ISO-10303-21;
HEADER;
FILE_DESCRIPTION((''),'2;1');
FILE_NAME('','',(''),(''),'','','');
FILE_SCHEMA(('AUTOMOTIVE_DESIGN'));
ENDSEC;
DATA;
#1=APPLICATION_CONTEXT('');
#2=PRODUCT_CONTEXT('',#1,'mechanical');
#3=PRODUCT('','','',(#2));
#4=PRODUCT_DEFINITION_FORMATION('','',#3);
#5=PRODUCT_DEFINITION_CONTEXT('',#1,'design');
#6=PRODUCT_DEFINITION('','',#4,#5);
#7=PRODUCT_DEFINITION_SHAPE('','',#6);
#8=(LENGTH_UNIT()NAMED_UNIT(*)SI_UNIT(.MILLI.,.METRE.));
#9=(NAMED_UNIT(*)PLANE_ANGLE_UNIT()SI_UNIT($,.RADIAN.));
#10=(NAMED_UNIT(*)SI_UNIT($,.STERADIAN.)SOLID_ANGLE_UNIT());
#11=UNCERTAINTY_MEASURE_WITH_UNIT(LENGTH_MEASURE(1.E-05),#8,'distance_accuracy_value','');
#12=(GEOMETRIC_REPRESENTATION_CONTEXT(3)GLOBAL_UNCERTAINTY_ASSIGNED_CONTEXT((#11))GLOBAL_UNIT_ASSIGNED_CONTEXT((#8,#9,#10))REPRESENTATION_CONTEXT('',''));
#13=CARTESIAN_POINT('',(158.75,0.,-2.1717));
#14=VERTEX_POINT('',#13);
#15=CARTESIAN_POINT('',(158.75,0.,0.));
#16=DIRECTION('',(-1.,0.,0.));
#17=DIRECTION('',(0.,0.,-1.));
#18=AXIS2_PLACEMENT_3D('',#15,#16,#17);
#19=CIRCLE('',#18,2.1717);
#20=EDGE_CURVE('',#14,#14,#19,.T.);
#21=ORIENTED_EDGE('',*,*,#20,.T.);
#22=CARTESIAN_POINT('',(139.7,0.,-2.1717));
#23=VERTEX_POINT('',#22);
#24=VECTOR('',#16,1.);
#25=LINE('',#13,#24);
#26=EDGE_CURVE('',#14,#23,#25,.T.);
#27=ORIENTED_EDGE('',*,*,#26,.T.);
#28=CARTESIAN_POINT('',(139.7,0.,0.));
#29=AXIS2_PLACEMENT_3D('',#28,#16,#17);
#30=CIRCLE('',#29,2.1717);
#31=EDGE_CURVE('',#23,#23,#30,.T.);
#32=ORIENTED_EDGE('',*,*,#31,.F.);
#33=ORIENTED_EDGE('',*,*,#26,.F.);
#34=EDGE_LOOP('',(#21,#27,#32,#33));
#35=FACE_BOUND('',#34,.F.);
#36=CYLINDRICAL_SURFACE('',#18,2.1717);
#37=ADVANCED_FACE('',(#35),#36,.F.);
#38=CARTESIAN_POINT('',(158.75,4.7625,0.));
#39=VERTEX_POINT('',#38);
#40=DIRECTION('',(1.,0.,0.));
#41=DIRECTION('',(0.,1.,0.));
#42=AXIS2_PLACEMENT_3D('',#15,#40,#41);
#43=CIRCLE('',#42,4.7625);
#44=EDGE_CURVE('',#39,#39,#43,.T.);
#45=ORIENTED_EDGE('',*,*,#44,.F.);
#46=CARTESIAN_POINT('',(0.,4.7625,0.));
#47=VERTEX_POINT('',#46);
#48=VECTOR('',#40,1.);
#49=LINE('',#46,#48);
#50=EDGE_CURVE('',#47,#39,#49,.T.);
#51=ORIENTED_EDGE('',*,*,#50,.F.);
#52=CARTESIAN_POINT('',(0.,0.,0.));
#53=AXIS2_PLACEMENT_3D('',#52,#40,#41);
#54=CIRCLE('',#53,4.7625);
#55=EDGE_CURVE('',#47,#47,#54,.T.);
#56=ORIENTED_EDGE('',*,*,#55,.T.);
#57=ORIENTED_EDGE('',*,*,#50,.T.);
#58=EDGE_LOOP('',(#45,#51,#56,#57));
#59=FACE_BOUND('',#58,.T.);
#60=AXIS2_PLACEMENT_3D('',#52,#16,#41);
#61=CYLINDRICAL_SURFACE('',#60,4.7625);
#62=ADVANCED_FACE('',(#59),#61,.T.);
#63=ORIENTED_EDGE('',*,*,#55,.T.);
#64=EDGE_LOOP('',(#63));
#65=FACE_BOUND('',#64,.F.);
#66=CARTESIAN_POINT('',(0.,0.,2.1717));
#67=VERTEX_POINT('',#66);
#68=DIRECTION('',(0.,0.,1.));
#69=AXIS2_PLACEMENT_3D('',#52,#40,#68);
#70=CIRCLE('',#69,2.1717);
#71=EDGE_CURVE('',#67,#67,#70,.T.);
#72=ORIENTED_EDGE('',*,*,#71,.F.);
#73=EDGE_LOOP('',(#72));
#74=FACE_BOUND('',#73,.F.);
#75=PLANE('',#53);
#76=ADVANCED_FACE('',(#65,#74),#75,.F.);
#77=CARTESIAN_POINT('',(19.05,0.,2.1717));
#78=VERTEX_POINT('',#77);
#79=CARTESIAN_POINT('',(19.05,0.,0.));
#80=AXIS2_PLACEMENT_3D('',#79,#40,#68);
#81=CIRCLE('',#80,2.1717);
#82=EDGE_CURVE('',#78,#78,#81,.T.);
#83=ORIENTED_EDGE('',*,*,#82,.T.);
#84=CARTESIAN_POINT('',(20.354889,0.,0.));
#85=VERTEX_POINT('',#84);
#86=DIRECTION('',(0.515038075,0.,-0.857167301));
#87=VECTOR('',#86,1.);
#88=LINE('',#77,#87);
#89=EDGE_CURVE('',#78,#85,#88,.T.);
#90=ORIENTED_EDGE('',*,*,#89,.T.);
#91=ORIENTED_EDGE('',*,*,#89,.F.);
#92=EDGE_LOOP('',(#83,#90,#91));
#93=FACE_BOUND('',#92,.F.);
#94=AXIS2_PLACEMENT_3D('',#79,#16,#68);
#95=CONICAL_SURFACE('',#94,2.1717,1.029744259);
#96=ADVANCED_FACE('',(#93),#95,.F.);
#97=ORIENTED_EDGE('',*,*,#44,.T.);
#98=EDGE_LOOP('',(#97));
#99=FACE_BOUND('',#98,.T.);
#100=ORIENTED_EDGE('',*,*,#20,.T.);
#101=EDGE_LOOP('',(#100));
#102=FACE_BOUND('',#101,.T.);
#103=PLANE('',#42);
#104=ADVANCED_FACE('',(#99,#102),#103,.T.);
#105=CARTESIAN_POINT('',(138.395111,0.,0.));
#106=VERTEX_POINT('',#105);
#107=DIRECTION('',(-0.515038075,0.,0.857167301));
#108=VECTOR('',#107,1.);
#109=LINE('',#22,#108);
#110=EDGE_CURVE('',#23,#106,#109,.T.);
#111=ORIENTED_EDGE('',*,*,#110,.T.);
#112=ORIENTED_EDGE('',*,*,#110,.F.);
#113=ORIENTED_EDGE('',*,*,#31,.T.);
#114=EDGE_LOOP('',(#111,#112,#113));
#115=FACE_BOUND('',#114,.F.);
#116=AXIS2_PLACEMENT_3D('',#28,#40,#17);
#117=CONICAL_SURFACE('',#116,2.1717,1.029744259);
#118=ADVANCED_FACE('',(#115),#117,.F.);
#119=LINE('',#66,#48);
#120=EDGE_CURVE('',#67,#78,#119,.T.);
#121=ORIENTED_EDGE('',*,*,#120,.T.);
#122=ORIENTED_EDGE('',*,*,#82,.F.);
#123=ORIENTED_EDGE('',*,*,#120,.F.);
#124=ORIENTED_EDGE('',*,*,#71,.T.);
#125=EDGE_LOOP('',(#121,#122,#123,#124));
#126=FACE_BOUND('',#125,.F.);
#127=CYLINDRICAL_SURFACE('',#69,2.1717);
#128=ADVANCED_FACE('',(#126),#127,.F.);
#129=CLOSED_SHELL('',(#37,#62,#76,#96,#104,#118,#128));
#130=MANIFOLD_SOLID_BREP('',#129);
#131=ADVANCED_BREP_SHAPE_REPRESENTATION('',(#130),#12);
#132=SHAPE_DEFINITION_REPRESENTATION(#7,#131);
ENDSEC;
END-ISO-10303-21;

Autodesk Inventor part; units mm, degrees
ref_plane "YZ Plane" through (0, 0, 0) normal (1, 0, 0) x (0, 1, 0)
ref_plane "XZ Plane" through (0, 0, 0) normal (0, 1, 0) x (-1, 0, 0)
ref_plane "XY Plane" through (0, 0, 0) normal (0, 0, 1) x (1, 0, 0)
sketch "Sketch1" plane through (0, 0, 0) normal (1, 0, 0) x (0, 1, 0)
  circle A0 centre (0, 0) radius 4.7625
  dimension "d0" = 9.525
extrude "Extrusion1" add sketch "Sketch1" along normal blind 158.75
sketch "Sketch2" plane through (158.75, 0, 0) normal (1, 0, 0) x (0, 0, -1)
  circle A0 centre (0, 0) radius 4.7625 projected
hole "Hole1" at (158.75, 0, 0) direction (-1, 0, 0) diameter 4.3434 depth 19.05 tip angle 118 thread size "12-24 UNC" class "2B" standard "ANSI Unified Screw Threads"
sketch "Sketch3" plane through (0, 0, 0) normal (-1, 0, 0) x (0, 0, 1)
  circle A0 centre (0, 0) radius 2.1717 projected
hole "Hole2" at (0, 0, 0) direction (1, 0, 0) diameter 4.3434 depth 19.05 tip angle 118 thread size "12-24 UNC" class "2B" standard "ANSI Unified Screw Threads"
properties part number "STOCK,HOOD,SPACER,10-32,6.25in" material "Aluminum 6061"
